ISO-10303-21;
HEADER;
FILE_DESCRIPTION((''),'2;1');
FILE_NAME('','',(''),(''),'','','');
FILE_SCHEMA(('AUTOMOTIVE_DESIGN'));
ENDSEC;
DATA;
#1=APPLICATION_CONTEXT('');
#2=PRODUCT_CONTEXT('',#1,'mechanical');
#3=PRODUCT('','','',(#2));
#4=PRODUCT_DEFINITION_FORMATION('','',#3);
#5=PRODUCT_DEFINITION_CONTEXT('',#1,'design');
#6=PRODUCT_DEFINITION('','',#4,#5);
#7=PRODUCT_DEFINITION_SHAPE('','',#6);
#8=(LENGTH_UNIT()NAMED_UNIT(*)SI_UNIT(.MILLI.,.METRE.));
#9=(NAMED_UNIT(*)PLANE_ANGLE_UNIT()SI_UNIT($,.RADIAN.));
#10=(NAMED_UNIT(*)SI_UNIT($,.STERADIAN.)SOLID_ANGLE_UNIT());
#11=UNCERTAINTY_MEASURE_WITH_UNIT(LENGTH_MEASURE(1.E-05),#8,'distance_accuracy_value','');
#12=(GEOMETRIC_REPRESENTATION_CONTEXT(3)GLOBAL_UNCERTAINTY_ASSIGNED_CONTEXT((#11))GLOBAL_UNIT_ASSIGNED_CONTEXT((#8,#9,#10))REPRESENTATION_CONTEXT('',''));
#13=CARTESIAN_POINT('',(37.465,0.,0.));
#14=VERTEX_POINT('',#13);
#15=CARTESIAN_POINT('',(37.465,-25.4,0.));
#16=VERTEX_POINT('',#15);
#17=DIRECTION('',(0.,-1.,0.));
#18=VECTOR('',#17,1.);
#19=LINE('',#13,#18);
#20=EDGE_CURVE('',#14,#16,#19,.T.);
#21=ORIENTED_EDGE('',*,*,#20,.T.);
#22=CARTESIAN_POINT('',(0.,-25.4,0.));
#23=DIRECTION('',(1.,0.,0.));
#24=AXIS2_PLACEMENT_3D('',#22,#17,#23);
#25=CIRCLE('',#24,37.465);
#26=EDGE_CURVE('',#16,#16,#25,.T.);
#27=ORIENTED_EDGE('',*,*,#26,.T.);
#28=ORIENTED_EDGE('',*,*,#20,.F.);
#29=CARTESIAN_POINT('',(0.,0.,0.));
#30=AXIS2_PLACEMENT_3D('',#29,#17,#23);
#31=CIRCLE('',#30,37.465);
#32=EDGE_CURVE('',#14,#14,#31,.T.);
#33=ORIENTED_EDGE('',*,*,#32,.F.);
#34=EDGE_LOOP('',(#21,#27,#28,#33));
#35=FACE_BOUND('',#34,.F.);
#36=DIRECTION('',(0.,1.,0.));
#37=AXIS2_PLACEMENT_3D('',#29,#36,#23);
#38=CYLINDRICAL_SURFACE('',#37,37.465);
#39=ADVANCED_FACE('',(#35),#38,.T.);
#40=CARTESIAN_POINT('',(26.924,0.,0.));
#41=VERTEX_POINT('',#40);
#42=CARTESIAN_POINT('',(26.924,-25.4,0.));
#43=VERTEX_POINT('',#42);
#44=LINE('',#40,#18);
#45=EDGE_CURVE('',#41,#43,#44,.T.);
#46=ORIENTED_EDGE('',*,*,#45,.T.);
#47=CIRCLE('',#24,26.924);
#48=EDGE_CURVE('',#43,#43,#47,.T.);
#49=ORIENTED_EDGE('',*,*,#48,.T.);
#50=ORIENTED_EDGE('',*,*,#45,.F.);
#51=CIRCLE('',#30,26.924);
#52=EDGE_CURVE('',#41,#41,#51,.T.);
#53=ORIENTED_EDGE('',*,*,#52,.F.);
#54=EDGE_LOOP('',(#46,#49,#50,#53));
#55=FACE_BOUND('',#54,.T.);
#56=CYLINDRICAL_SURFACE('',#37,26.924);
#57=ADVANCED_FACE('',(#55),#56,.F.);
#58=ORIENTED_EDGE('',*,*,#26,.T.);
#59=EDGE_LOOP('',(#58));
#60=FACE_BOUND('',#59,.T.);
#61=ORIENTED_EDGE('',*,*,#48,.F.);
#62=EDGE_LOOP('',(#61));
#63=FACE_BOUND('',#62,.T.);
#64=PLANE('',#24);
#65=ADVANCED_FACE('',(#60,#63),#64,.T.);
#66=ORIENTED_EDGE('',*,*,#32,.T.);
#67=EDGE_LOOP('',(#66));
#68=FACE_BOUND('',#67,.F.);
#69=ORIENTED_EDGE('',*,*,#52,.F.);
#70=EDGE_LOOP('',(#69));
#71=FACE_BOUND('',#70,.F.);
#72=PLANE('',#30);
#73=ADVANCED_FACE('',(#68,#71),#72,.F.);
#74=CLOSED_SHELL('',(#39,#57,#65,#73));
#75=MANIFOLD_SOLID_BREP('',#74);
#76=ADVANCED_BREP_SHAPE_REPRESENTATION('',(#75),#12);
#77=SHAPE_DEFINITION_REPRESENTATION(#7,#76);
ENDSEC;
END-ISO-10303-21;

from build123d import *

# Parameters (mm, degrees)
F0_R     = 37.465
F0_R_2   = 26.924
F1_DEPTH = 25.4


# Not quite as in the source:
# - a feature of the source that left no trace in its solid (it failed there, or was rolled back) is left out


with BuildPart() as f1:
    # F0 (on Front) → F1 (new body)
    with BuildSketch(Plane.XZ):
        Circle(F0_R)
        Circle(F0_R_2, mode=Mode.SUBTRACT)
    extrude(amount=F1_DEPTH)


solid = f1.part
